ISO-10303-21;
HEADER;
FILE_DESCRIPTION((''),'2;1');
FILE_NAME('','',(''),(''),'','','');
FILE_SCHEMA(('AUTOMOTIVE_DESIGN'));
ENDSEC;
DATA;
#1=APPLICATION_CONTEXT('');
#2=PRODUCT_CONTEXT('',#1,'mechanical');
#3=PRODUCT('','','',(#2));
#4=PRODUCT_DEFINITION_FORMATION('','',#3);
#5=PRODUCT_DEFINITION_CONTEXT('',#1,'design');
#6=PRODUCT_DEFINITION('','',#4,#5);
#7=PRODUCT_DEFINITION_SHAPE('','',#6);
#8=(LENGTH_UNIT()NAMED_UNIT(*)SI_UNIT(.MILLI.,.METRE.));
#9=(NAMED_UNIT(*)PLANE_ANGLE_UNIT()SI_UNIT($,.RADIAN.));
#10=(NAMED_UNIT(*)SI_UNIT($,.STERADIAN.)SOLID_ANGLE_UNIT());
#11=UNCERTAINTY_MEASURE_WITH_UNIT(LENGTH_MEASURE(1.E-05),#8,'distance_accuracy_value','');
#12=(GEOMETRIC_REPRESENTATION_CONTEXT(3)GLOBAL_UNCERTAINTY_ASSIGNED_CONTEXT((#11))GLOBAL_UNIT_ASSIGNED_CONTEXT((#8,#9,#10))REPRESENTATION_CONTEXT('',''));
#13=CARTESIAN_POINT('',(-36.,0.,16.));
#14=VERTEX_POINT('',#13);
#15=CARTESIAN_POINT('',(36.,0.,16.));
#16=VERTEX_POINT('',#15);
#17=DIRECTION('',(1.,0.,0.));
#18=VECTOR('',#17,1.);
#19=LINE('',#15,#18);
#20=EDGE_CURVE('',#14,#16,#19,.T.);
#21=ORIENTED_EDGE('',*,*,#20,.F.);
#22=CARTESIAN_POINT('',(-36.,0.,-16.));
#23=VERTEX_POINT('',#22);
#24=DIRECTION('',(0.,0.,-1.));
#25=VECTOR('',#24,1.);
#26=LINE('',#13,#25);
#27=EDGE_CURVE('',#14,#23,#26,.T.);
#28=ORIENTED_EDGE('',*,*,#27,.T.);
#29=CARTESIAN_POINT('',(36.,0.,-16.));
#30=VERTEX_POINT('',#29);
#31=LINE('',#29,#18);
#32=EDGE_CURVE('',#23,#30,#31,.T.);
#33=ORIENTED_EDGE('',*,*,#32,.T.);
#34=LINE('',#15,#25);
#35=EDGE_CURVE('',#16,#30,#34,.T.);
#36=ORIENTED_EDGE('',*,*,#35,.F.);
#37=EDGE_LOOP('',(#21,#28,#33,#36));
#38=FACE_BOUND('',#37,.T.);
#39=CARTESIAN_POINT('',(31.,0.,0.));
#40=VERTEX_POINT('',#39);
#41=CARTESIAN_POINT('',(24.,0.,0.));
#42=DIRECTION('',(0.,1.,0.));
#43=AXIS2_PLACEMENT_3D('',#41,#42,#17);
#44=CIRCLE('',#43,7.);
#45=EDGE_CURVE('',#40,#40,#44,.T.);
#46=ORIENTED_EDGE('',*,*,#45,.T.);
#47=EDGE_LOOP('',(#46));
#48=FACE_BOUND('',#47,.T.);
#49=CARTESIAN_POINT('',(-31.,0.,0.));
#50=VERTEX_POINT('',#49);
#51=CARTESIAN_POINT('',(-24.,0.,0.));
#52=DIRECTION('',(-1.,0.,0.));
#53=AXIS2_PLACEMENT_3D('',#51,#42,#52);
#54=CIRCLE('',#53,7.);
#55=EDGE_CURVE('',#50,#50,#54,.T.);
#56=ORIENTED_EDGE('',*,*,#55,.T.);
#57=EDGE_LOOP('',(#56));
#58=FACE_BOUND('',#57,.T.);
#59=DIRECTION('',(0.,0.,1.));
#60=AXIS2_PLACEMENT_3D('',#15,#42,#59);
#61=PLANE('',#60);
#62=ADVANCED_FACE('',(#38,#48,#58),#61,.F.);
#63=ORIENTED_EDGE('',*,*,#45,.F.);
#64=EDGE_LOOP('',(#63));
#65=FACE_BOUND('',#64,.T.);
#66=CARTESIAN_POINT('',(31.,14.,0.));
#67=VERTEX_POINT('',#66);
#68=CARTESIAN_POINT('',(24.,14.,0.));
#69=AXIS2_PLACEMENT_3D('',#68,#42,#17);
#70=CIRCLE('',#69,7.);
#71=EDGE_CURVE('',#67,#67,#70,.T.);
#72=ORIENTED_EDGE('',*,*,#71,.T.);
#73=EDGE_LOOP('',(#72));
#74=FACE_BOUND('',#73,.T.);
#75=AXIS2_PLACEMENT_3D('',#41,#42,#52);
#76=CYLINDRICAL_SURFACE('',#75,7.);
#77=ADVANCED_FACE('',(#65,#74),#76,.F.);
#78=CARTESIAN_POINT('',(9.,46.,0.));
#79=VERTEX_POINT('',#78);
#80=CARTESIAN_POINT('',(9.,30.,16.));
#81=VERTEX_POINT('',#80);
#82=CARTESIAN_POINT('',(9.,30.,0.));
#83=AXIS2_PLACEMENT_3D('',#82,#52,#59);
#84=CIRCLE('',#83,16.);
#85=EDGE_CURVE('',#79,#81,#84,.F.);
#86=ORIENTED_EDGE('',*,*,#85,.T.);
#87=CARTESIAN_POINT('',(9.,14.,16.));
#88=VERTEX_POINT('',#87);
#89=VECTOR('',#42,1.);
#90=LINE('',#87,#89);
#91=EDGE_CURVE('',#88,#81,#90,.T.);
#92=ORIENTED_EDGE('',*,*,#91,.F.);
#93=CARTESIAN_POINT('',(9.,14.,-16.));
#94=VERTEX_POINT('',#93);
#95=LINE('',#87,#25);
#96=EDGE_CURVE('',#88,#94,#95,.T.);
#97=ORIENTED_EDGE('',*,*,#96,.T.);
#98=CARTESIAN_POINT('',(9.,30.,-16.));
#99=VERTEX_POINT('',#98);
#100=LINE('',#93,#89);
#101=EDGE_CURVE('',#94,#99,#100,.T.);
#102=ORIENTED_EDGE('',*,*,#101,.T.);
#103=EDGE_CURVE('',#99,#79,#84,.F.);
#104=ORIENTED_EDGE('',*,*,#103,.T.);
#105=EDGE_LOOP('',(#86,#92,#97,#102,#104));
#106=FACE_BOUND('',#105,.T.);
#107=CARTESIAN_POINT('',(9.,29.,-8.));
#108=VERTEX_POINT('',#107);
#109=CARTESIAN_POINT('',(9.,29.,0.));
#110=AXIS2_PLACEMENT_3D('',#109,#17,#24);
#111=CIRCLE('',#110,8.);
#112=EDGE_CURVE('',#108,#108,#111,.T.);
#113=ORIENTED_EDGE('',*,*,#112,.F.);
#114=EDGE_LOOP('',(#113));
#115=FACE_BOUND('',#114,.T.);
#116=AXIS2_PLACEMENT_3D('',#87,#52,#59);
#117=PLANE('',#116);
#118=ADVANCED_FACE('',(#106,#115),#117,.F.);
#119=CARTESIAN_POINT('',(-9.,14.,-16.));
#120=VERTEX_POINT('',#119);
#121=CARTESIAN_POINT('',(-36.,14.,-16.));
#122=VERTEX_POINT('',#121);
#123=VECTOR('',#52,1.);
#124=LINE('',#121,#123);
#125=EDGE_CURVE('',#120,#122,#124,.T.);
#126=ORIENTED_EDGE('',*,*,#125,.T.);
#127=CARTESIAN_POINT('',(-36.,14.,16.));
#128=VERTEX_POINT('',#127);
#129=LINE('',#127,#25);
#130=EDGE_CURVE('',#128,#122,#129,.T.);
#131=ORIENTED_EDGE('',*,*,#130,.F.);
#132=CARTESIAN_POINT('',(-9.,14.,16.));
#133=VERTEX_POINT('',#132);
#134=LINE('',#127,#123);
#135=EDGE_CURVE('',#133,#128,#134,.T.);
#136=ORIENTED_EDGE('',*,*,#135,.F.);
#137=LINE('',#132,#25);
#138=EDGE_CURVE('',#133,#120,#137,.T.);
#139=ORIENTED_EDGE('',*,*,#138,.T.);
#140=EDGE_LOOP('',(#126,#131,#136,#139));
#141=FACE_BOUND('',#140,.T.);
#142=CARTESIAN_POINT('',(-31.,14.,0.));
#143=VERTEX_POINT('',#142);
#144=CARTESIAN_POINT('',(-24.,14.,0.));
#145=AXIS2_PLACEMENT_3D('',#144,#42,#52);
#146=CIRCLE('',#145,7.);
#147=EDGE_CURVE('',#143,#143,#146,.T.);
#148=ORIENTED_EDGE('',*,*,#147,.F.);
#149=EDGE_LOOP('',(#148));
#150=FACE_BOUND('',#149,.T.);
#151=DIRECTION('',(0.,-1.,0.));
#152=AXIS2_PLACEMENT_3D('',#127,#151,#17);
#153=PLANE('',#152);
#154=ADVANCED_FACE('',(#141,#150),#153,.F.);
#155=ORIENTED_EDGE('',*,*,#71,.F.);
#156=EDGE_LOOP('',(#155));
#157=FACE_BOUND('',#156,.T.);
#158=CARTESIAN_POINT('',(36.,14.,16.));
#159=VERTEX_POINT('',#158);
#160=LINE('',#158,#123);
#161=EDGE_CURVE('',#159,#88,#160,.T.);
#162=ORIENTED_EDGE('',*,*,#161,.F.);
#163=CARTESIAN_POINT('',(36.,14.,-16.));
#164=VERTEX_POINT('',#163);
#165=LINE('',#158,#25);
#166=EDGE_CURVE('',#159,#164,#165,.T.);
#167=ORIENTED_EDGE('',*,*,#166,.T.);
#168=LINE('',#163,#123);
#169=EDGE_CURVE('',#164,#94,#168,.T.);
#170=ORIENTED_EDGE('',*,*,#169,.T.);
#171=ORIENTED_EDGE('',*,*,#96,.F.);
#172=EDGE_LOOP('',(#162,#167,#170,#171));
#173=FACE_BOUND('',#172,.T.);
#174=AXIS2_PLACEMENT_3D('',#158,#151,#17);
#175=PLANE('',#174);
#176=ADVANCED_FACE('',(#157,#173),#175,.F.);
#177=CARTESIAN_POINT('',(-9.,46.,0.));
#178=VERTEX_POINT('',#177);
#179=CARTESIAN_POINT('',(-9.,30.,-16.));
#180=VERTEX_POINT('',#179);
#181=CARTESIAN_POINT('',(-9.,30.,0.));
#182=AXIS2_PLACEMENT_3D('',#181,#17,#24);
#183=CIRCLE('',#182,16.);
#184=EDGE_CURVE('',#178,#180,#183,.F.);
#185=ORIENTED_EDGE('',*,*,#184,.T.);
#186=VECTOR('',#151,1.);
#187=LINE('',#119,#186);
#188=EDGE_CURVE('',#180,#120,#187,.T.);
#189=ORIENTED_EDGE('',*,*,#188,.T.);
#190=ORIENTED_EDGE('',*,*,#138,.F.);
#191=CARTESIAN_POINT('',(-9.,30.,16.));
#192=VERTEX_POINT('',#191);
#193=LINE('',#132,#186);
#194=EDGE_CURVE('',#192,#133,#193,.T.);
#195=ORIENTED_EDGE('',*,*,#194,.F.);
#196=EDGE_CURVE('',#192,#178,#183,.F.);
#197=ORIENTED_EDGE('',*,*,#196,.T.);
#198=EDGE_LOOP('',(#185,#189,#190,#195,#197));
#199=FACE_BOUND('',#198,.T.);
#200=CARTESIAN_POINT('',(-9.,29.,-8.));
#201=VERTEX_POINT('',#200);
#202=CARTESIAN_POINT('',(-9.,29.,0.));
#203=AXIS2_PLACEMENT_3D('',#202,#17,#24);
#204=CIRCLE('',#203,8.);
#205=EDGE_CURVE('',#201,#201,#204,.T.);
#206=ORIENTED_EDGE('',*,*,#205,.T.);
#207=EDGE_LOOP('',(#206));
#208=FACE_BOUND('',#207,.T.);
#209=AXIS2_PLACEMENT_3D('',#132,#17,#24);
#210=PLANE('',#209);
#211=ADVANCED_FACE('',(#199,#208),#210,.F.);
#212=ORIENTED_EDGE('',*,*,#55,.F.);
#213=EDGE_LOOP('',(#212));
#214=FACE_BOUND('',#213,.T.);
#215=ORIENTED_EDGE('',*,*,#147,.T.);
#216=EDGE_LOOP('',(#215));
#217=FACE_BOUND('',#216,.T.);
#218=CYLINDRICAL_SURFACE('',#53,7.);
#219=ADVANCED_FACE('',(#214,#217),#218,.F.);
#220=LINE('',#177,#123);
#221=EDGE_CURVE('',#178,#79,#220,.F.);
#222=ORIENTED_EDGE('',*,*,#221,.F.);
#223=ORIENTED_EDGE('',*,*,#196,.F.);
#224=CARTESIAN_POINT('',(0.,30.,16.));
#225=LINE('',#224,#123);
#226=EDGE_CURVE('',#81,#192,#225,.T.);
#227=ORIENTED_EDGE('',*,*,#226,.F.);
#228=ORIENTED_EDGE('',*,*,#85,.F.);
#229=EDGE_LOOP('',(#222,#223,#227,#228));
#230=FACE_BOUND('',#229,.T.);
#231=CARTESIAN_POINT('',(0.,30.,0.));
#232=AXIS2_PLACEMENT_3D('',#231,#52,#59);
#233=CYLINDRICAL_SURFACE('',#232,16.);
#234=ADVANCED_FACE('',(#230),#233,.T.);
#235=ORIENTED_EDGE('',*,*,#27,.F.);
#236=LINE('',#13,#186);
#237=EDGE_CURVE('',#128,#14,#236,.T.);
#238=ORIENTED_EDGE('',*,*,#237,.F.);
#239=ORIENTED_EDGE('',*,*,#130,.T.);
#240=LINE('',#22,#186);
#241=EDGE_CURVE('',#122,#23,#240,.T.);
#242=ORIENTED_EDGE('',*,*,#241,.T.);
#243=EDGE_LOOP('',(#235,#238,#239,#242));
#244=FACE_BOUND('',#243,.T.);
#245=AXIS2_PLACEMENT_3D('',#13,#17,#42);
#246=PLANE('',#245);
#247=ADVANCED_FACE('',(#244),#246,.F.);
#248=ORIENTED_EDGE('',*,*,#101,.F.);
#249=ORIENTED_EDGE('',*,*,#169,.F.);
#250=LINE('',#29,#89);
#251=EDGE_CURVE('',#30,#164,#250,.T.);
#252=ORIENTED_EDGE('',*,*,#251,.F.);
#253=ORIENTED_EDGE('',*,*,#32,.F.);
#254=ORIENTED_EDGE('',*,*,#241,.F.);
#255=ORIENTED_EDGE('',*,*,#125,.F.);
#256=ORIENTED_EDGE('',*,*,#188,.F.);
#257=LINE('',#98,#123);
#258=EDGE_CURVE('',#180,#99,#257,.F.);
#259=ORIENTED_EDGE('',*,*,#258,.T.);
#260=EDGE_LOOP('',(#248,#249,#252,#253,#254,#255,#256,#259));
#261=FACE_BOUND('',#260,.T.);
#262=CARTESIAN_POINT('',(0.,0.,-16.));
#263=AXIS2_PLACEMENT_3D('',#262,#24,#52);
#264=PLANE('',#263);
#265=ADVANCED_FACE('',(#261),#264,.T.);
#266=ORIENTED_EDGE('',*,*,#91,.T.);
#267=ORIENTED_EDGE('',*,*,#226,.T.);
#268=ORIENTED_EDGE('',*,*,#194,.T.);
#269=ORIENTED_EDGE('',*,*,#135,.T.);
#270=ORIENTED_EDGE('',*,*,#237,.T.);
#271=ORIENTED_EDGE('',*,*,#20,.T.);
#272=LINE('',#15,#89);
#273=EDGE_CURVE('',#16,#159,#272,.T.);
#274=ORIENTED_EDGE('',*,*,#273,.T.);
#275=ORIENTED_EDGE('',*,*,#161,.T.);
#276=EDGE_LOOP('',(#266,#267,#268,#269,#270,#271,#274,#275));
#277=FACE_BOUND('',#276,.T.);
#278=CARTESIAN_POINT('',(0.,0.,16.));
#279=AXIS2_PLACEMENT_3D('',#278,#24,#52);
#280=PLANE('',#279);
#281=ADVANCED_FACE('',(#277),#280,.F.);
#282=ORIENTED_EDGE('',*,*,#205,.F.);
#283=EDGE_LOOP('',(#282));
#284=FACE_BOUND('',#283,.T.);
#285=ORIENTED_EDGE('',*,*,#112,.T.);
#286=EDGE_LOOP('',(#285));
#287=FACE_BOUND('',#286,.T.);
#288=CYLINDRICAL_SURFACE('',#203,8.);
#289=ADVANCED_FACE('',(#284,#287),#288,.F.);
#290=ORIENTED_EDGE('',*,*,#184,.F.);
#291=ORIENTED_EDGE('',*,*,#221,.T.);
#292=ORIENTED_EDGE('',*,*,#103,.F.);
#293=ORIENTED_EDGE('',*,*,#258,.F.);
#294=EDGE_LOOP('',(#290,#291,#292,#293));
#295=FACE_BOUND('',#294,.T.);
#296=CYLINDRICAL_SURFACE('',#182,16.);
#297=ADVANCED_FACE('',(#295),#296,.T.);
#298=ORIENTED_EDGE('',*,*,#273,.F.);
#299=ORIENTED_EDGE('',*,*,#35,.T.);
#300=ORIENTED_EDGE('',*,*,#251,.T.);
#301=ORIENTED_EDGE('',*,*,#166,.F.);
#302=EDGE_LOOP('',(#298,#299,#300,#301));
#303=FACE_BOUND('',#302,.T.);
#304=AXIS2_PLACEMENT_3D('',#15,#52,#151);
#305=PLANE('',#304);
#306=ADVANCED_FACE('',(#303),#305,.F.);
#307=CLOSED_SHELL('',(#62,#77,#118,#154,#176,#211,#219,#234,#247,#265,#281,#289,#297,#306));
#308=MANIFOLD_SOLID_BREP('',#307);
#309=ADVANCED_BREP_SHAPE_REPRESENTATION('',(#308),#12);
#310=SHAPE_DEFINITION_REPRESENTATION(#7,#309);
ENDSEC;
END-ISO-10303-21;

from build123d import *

# Parameters (mm, degrees)
BOSS_EXTRUDE1_DEPTH = 16
FILLET1_R           = 16
SKETCH6_R           = 7
CUT_EXTRUDE3_DEPTH  = 14
SKETCH3_R           = 8
CUT_EXTRUDE2_DEPTH  = 18


with BuildPart() as part:
    # Sketch1 → Boss-Extrude1 (new, symmetric)
    with BuildSketch(Plane.XY):
        Polygon((36, 0), (-36, 0), (-36, 14), (-9, 14), (-9, 46), (9, 46), (9, 14), (36, 14), align=None)
    extrude(amount=BOSS_EXTRUDE1_DEPTH, both=True)

    # Fillet1
    fillet1_edges = [part.edges().sort_by_distance(p)[0] for p in [
        (0, 46, -16),
        (0, 46, 16),
    ]]
    fillet(fillet1_edges, radius=FILLET1_R - 0.0001)  # a hair under: the kernel refuses the full size

    # Sketch6 → Cut-Extrude3 (cut)
    with BuildSketch(Plane(origin=(0, 14, 0), x_dir=(1, 0, 0), z_dir=(0, 1, 0))):
        with Locations(Location((-24, 0, 0), (0, 0, 180))):
            Circle(SKETCH6_R)
        with Locations((24, 0)):
            Circle(SKETCH6_R)
    extrude(amount=-CUT_EXTRUDE3_DEPTH, mode=Mode.SUBTRACT)

    # Sketch3 → Cut-Extrude2 (cut)
    with BuildSketch(Plane(origin=(9, 0, 0), x_dir=(0, 0, -1), z_dir=(1, 0, 0))):
        with Locations((0, 29)):
            Circle(SKETCH3_R)
    extrude(amount=-CUT_EXTRUDE2_DEPTH, mode=Mode.SUBTRACT)


solid = part.part
